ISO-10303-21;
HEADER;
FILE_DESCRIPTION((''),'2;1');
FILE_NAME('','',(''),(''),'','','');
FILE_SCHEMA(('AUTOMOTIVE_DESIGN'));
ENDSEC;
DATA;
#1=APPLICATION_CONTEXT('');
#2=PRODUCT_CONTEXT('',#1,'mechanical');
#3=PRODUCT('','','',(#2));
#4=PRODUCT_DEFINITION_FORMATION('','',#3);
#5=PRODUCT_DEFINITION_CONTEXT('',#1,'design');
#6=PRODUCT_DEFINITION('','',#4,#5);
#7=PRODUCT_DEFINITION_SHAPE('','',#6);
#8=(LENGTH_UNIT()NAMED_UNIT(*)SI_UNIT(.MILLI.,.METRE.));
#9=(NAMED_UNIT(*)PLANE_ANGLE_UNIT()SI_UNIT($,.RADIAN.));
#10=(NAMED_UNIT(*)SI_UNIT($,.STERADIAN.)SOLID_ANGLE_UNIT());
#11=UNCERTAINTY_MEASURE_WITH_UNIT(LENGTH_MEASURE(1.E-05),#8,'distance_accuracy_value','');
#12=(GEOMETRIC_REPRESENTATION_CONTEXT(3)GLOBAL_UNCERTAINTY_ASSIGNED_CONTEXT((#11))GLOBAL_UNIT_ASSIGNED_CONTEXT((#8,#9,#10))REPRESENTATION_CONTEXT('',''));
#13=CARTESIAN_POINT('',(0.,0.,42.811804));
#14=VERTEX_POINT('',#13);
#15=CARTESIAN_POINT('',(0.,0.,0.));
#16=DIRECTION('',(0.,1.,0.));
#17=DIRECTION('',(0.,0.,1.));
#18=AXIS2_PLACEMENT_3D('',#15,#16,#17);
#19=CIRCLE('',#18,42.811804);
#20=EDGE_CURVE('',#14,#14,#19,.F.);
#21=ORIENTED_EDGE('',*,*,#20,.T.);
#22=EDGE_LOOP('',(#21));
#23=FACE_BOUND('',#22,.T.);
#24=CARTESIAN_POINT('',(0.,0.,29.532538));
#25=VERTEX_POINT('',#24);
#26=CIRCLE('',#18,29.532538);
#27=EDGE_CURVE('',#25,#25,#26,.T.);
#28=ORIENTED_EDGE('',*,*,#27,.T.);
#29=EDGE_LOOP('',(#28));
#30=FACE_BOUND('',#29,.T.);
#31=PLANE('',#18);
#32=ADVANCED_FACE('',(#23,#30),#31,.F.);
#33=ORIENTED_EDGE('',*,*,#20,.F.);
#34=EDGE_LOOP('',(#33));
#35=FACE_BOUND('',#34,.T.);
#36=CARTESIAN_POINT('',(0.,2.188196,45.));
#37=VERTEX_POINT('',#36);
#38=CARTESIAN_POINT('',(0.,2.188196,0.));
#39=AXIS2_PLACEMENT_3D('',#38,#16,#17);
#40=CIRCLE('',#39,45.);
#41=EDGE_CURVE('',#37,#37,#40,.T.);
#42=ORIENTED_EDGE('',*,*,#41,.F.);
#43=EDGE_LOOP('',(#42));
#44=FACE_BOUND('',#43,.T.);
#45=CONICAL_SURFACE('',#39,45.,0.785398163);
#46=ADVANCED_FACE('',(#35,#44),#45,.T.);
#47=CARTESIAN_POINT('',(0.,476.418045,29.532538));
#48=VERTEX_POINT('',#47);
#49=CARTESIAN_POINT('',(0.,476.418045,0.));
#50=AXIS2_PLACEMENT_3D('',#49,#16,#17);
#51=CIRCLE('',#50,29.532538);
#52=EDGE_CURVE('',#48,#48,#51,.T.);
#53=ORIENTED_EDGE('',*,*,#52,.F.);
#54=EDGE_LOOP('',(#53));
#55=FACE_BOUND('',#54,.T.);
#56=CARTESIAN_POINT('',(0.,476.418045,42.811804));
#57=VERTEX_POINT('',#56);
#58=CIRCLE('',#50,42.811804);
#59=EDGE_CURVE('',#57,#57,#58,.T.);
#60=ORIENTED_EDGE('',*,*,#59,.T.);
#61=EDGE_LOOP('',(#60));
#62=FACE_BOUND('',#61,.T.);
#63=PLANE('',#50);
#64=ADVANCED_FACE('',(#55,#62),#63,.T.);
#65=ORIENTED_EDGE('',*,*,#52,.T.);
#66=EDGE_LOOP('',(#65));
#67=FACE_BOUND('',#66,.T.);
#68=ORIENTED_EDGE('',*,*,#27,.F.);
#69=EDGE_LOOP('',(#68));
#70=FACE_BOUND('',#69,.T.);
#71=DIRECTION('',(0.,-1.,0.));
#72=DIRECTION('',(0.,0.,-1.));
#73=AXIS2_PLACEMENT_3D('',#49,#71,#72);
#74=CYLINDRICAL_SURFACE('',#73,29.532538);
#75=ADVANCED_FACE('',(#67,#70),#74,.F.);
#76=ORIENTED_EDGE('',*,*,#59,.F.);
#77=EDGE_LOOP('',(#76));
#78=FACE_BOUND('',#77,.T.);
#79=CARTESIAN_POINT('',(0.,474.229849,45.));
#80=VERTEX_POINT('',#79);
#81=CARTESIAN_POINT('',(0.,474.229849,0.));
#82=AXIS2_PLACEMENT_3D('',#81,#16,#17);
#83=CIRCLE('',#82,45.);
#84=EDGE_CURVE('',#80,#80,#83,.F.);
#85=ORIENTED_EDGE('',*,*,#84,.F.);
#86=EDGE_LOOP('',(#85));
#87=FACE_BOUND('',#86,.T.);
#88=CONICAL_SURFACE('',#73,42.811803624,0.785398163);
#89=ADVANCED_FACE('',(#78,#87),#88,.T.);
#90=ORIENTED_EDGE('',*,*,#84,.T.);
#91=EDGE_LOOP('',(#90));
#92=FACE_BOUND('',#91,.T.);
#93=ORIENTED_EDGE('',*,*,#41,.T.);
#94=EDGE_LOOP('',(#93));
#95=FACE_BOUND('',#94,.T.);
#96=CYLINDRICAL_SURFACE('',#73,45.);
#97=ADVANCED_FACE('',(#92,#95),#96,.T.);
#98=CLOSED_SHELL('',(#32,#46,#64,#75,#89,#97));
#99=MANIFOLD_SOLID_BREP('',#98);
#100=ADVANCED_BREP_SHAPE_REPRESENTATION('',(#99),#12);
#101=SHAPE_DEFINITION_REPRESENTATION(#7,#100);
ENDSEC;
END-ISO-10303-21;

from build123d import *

# Parameters (mm, degrees)
SKETCH1_R           = 45
BOSS_EXTRUDE1_DEPTH = 476.418045287
SKETCH2_R           = 29.532538406
CUT_EXTRUDE1_DEPTH  = 481.649720561
CHAMFER1_SIZE       = 2.188196376


with BuildPart() as part:
    # Sketch1 → Boss-Extrude1 (new body)
    with BuildSketch(Plane(origin=(0, 0, 0), x_dir=(1, 0, 0), z_dir=(0, 1, 0))):
        Circle(SKETCH1_R)
    extrude(amount=BOSS_EXTRUDE1_DEPTH)

    # Sketch2 → Cut-Extrude1 (cut, through all)
    with BuildSketch(Plane(origin=(0, 0, 0), x_dir=(1, 0, 0), z_dir=(0, 1, 0))):
        Circle(SKETCH2_R)
    extrude(amount=CUT_EXTRUDE1_DEPTH, mode=Mode.SUBTRACT)

    # Chamfer1
    chamfer1_edges = [part.edges().sort_by_distance(p)[0] for p in [
        (-45, 476.418045287, 0),
        (-45, 0, 0),
    ]]
    chamfer(chamfer1_edges, length=CHAMFER1_SIZE)


solid = part.part
